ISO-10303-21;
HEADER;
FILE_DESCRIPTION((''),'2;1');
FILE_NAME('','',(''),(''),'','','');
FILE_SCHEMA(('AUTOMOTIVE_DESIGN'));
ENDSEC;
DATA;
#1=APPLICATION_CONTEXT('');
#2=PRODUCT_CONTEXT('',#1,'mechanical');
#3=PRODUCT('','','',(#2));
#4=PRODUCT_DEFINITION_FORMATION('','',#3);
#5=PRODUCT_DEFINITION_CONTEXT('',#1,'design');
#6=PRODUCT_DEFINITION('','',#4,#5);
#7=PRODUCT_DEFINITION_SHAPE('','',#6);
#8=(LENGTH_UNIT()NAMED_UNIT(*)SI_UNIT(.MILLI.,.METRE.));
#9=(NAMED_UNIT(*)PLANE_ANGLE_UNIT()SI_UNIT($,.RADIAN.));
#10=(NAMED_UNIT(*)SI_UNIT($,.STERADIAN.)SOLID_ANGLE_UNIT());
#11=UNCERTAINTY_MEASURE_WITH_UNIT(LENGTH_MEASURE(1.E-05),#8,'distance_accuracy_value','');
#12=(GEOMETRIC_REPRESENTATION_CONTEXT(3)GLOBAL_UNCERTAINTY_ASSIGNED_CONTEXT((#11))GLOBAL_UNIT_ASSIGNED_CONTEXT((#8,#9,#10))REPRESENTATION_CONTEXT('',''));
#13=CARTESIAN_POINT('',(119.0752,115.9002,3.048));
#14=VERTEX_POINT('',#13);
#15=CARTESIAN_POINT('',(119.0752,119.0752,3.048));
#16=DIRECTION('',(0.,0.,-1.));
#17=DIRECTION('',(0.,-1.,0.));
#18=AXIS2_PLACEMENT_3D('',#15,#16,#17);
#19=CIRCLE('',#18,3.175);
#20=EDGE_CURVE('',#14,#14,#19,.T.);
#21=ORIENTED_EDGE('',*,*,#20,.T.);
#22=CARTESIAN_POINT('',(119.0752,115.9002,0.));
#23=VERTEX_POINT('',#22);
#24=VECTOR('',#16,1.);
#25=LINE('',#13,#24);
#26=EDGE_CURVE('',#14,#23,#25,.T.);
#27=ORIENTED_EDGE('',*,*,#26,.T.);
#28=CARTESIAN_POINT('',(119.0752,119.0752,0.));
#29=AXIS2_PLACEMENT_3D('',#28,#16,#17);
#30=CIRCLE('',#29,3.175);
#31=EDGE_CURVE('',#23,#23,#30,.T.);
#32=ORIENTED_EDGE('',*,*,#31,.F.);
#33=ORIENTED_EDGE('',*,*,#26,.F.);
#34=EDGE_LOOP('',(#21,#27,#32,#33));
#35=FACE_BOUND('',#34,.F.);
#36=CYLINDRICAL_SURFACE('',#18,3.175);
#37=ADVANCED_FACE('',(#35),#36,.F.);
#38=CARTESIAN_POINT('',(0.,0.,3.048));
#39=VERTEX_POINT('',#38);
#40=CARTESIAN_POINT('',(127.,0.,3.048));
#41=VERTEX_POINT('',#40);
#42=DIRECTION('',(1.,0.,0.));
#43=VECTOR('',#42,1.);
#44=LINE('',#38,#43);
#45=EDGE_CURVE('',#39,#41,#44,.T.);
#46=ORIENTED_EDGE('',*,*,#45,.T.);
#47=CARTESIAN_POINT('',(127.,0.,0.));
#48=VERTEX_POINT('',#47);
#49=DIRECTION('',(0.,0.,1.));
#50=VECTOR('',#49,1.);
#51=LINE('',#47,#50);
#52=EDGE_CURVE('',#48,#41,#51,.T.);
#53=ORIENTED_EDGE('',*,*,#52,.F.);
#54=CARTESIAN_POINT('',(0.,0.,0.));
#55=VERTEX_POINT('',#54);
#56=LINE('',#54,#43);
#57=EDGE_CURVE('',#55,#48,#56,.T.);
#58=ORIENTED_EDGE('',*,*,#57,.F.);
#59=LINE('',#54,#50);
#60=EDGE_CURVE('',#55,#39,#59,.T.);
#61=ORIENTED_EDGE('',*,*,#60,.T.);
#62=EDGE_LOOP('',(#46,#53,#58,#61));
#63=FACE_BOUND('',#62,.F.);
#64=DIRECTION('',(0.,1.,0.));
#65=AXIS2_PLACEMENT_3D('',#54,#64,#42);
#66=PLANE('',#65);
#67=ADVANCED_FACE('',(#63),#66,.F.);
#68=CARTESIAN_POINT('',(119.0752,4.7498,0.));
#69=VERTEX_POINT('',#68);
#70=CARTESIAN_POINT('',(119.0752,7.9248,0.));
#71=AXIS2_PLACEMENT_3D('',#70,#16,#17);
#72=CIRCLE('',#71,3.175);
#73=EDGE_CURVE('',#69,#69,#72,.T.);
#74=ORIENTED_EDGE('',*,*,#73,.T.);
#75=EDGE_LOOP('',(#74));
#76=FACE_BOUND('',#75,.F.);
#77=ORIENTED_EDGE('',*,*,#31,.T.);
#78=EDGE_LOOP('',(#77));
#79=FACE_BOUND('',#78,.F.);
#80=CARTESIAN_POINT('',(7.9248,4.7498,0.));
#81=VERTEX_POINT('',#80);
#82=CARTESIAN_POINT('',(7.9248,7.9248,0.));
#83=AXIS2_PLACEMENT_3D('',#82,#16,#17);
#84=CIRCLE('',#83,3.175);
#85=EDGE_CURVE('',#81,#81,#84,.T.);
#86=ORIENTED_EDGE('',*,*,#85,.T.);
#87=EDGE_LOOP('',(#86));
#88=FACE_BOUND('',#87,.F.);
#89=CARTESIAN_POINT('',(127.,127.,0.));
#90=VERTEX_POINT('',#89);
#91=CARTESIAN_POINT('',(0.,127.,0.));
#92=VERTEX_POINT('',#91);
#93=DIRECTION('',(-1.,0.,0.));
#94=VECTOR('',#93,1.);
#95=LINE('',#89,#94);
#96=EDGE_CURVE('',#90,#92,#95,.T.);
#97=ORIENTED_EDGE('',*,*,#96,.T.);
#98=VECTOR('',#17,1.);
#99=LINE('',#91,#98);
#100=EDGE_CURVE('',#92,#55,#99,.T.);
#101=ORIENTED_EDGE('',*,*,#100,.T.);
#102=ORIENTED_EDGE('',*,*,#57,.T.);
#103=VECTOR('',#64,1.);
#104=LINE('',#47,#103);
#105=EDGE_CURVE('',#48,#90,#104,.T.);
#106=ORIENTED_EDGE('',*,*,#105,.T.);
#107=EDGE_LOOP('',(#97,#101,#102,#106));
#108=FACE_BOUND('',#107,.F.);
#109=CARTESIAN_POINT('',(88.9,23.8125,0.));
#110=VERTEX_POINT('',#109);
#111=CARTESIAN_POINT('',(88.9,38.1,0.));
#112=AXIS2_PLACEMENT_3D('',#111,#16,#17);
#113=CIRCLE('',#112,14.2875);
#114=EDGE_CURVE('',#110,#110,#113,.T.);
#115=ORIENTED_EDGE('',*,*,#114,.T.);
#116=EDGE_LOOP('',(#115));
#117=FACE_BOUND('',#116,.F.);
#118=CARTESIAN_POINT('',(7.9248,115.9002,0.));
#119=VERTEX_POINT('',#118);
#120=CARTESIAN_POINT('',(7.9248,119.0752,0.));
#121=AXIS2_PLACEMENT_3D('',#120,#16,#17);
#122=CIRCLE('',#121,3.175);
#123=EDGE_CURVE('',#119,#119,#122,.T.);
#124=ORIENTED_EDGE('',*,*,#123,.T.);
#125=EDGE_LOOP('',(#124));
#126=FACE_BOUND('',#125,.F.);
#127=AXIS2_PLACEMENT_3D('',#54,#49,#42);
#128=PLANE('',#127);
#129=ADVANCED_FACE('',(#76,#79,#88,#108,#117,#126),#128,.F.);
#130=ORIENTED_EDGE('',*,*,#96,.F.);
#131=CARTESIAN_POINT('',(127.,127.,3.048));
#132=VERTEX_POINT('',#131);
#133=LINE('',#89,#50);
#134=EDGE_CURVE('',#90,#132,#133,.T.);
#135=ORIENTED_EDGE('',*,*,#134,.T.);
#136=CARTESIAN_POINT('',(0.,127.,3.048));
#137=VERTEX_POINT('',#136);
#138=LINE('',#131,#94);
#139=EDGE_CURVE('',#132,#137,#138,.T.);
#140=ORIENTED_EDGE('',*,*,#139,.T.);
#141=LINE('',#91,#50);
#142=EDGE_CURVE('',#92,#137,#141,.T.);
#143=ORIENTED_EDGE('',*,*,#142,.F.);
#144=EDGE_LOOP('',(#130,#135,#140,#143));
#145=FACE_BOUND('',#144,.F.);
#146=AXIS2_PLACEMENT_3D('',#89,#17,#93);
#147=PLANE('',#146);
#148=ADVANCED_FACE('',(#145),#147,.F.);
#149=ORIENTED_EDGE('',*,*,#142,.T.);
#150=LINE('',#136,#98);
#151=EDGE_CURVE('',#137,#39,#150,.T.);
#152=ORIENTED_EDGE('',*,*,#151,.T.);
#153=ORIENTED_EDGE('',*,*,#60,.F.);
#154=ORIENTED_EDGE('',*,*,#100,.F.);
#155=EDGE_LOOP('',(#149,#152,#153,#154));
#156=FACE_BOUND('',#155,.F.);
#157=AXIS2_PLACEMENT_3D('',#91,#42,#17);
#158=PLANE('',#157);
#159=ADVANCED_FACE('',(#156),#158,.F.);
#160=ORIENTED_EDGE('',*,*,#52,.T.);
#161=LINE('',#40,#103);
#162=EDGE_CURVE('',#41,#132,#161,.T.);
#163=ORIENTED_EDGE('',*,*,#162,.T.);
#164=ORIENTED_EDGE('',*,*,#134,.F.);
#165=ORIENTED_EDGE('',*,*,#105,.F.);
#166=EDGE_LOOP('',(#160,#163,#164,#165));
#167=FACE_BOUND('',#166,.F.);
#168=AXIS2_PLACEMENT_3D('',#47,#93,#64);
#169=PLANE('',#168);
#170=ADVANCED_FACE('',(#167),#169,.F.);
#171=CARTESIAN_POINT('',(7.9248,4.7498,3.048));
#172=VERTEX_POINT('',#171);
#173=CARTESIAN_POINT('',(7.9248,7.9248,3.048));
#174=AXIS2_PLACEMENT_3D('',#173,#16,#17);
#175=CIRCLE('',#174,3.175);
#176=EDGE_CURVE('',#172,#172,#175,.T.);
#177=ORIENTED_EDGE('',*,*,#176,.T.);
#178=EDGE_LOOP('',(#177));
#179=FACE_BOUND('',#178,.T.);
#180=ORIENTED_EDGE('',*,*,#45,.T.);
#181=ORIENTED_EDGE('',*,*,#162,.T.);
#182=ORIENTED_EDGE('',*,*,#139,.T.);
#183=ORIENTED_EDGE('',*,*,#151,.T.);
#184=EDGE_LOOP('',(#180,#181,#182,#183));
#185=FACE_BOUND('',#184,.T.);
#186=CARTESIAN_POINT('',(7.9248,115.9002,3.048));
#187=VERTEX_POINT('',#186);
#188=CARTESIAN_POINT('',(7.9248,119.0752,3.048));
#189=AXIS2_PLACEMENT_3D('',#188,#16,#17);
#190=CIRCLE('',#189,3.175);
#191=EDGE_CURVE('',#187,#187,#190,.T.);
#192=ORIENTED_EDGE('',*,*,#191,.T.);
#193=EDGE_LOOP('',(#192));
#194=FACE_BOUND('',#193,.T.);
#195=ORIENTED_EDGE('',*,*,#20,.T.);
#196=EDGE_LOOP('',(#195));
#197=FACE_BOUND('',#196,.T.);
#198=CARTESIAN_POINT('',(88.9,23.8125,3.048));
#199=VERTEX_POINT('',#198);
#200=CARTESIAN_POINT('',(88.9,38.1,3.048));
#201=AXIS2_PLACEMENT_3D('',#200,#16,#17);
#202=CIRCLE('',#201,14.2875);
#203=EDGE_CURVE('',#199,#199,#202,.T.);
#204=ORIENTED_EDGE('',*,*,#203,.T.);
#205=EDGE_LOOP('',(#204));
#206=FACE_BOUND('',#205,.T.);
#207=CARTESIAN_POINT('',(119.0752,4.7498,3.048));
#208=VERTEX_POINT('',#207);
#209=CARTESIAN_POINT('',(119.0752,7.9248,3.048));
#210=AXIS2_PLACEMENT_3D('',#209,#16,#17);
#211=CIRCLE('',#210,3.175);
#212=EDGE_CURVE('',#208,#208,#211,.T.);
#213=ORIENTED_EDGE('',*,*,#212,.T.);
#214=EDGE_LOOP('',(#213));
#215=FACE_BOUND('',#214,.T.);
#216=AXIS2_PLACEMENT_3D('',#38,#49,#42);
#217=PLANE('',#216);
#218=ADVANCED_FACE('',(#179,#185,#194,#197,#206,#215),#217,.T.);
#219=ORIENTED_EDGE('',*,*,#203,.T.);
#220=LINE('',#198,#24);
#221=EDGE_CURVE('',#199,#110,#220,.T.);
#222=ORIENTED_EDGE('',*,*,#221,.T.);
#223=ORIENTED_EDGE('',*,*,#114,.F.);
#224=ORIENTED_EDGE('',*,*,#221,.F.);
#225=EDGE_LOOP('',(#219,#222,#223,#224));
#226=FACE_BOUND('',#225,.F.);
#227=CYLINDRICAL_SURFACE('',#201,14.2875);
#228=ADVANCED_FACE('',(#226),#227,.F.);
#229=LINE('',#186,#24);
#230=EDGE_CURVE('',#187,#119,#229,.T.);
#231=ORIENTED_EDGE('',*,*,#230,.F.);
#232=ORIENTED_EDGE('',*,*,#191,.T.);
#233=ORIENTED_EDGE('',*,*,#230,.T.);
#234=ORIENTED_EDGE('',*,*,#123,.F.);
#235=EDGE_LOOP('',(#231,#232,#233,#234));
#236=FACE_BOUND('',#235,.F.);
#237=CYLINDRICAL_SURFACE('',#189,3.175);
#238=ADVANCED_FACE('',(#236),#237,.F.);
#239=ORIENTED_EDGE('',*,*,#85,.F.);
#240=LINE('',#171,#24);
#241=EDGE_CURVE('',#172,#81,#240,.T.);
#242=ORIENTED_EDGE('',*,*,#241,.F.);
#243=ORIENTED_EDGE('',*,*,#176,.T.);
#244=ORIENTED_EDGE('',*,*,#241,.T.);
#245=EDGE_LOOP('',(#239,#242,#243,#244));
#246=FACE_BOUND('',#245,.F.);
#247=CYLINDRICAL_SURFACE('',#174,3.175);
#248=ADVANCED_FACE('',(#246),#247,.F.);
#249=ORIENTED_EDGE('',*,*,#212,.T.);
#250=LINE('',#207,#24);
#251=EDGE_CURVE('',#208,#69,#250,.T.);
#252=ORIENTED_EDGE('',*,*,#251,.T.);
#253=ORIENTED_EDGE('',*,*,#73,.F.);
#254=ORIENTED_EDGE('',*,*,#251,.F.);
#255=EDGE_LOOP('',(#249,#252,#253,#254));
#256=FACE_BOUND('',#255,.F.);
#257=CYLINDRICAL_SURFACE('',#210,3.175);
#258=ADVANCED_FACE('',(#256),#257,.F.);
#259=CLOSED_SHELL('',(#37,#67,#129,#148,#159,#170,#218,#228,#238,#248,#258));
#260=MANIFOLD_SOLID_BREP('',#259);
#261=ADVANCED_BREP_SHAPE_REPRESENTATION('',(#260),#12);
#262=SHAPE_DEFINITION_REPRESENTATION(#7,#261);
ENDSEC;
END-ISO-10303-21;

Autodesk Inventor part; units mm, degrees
ref_plane "YZ Plane" through (0, 0, 0) normal (1, 0, 0) x (0, 1, 0)
ref_plane "XZ Plane" through (0, 0, 0) normal (0, 1, 0) x (-1, 0, 0)
ref_plane "XY Plane" through (0, 0, 0) normal (0, 0, 1) x (1, 0, 0)
sketch "Sketch1" plane through (0, 0, 0) normal (0, 0, 1) x (1, 0, 0)
  line L0 (0, 0) -> (127, 0)
  line L1 (127, 0) -> (127, 127)
  line L2 (127, 127) -> (0, 127)
  line L3 (0, 127) -> (0, 0)
  dimension "d0" = 127
extrude "Plate1" add sketch "Sketch1" along normal blind 3.048
sketch "gbmh_sketch" plane through (0, 0, 3.048) normal (0, 0, 1) x (1, 0, 0)
  line L0 (7.9248, 119.0752) -> (119.0752, 119.0752) construction
  line L1 (127, 127) -> (0, 127) construction
  line L2 (119.0752, 119.0752) -> (119.0752, 7.9248) construction
  line L3 (119.0752, 7.9248) -> (7.9248, 7.9248) construction
  line L4 (7.9248, 7.9248) -> (7.9248, 119.0752) construction
  line L5 (7.9248, 119.0752) -> (7.9248, 127) construction
  line L6 (7.9248, 119.0752) -> (0, 119.0752) construction
  line L7 (0, 127) -> (0, 0) construction
  line L8 (119.0752, 7.9248) -> (127, 7.9248) construction
  line L9 (127, 0) -> (127, 127) construction
  line L10 (119.0752, 7.9248) -> (119.0752, 0) construction
  dimension "d2" = 111.1504
  dimension "d3" = 111.1504
  dimension "d4" = 111.1504
  dimension "d5" = 111.1504
hole "gbmh" at (7.9248, 119.0752, 3.048) at (7.9248, 7.9248, 3.048) at (119.0752, 7.9248, 3.048) at (119.0752, 119.0752, 3.048) direction (0, 0, -1) diameter 6.35 depth 3.048 tip angle 118
sketch "bearing_hole_sketch" plane through (0, 0, 3.048) normal (0, 0, 1) x (1, 0, 0)
  line L0 (127, 0) -> (0, 0) projected
  line L1 (127, 127) -> (127, 0) projected
  point P0 (88.9, 38.1)
  dimension "d13" = 38.1
  dimension "d14" = 38.1
hole "ss_bearing_hole" at (88.9, 38.1, 3.048) direction (0, 0, -1) diameter 28.575 depth 3.048 tip angle 118
equation "\"d6\" = gb_mh_diameter"
equation "\"d11\" = Thickness"
equation "\"d15\" = gb_bearing_diameter"
equation "\"d20\" = Thickness"
equation "\"BendRadius\" = Thickness"
equation "\"BendReliefWidth\" = Thickness"
equation "\"BendReliefDepth\" = 0.5 * Thickness"
equation "\"CornerReliefSize\" = 4 * Thickness"
equation "\"MinimumRemnant\" = 2 * Thickness"
equation "\"TransitionRadius\" = BendRadius"
equation "\"JacobiRadiusSize\" = BendRadius"
equation "\"GapSize\" = Thickness"
equation "\"d1\" = BendRadius"
equation "\"gb_mh_seperation\" = 111.1504"
equation "\"gb_mh_diameter\" = 6.35"
equation "\"gb_axle_from_edge\" = 38.1"
equation "\"gb_width\" = 127"
equation "\"gb_bearing_diameter\" = 28.575"
equation "\"gb_to_bottom_of_side_assembly\" = 4.7752"
equation "\"gb_mh_seperation_alt\" = 111.125"
equation "\"gb_axle_from_edge_alt\" = 43.1546"
equation "\"Thickness\" = 3.048"
properties part number "gearboxbearingplate(gbpb)" material "Aluminum 6061"
